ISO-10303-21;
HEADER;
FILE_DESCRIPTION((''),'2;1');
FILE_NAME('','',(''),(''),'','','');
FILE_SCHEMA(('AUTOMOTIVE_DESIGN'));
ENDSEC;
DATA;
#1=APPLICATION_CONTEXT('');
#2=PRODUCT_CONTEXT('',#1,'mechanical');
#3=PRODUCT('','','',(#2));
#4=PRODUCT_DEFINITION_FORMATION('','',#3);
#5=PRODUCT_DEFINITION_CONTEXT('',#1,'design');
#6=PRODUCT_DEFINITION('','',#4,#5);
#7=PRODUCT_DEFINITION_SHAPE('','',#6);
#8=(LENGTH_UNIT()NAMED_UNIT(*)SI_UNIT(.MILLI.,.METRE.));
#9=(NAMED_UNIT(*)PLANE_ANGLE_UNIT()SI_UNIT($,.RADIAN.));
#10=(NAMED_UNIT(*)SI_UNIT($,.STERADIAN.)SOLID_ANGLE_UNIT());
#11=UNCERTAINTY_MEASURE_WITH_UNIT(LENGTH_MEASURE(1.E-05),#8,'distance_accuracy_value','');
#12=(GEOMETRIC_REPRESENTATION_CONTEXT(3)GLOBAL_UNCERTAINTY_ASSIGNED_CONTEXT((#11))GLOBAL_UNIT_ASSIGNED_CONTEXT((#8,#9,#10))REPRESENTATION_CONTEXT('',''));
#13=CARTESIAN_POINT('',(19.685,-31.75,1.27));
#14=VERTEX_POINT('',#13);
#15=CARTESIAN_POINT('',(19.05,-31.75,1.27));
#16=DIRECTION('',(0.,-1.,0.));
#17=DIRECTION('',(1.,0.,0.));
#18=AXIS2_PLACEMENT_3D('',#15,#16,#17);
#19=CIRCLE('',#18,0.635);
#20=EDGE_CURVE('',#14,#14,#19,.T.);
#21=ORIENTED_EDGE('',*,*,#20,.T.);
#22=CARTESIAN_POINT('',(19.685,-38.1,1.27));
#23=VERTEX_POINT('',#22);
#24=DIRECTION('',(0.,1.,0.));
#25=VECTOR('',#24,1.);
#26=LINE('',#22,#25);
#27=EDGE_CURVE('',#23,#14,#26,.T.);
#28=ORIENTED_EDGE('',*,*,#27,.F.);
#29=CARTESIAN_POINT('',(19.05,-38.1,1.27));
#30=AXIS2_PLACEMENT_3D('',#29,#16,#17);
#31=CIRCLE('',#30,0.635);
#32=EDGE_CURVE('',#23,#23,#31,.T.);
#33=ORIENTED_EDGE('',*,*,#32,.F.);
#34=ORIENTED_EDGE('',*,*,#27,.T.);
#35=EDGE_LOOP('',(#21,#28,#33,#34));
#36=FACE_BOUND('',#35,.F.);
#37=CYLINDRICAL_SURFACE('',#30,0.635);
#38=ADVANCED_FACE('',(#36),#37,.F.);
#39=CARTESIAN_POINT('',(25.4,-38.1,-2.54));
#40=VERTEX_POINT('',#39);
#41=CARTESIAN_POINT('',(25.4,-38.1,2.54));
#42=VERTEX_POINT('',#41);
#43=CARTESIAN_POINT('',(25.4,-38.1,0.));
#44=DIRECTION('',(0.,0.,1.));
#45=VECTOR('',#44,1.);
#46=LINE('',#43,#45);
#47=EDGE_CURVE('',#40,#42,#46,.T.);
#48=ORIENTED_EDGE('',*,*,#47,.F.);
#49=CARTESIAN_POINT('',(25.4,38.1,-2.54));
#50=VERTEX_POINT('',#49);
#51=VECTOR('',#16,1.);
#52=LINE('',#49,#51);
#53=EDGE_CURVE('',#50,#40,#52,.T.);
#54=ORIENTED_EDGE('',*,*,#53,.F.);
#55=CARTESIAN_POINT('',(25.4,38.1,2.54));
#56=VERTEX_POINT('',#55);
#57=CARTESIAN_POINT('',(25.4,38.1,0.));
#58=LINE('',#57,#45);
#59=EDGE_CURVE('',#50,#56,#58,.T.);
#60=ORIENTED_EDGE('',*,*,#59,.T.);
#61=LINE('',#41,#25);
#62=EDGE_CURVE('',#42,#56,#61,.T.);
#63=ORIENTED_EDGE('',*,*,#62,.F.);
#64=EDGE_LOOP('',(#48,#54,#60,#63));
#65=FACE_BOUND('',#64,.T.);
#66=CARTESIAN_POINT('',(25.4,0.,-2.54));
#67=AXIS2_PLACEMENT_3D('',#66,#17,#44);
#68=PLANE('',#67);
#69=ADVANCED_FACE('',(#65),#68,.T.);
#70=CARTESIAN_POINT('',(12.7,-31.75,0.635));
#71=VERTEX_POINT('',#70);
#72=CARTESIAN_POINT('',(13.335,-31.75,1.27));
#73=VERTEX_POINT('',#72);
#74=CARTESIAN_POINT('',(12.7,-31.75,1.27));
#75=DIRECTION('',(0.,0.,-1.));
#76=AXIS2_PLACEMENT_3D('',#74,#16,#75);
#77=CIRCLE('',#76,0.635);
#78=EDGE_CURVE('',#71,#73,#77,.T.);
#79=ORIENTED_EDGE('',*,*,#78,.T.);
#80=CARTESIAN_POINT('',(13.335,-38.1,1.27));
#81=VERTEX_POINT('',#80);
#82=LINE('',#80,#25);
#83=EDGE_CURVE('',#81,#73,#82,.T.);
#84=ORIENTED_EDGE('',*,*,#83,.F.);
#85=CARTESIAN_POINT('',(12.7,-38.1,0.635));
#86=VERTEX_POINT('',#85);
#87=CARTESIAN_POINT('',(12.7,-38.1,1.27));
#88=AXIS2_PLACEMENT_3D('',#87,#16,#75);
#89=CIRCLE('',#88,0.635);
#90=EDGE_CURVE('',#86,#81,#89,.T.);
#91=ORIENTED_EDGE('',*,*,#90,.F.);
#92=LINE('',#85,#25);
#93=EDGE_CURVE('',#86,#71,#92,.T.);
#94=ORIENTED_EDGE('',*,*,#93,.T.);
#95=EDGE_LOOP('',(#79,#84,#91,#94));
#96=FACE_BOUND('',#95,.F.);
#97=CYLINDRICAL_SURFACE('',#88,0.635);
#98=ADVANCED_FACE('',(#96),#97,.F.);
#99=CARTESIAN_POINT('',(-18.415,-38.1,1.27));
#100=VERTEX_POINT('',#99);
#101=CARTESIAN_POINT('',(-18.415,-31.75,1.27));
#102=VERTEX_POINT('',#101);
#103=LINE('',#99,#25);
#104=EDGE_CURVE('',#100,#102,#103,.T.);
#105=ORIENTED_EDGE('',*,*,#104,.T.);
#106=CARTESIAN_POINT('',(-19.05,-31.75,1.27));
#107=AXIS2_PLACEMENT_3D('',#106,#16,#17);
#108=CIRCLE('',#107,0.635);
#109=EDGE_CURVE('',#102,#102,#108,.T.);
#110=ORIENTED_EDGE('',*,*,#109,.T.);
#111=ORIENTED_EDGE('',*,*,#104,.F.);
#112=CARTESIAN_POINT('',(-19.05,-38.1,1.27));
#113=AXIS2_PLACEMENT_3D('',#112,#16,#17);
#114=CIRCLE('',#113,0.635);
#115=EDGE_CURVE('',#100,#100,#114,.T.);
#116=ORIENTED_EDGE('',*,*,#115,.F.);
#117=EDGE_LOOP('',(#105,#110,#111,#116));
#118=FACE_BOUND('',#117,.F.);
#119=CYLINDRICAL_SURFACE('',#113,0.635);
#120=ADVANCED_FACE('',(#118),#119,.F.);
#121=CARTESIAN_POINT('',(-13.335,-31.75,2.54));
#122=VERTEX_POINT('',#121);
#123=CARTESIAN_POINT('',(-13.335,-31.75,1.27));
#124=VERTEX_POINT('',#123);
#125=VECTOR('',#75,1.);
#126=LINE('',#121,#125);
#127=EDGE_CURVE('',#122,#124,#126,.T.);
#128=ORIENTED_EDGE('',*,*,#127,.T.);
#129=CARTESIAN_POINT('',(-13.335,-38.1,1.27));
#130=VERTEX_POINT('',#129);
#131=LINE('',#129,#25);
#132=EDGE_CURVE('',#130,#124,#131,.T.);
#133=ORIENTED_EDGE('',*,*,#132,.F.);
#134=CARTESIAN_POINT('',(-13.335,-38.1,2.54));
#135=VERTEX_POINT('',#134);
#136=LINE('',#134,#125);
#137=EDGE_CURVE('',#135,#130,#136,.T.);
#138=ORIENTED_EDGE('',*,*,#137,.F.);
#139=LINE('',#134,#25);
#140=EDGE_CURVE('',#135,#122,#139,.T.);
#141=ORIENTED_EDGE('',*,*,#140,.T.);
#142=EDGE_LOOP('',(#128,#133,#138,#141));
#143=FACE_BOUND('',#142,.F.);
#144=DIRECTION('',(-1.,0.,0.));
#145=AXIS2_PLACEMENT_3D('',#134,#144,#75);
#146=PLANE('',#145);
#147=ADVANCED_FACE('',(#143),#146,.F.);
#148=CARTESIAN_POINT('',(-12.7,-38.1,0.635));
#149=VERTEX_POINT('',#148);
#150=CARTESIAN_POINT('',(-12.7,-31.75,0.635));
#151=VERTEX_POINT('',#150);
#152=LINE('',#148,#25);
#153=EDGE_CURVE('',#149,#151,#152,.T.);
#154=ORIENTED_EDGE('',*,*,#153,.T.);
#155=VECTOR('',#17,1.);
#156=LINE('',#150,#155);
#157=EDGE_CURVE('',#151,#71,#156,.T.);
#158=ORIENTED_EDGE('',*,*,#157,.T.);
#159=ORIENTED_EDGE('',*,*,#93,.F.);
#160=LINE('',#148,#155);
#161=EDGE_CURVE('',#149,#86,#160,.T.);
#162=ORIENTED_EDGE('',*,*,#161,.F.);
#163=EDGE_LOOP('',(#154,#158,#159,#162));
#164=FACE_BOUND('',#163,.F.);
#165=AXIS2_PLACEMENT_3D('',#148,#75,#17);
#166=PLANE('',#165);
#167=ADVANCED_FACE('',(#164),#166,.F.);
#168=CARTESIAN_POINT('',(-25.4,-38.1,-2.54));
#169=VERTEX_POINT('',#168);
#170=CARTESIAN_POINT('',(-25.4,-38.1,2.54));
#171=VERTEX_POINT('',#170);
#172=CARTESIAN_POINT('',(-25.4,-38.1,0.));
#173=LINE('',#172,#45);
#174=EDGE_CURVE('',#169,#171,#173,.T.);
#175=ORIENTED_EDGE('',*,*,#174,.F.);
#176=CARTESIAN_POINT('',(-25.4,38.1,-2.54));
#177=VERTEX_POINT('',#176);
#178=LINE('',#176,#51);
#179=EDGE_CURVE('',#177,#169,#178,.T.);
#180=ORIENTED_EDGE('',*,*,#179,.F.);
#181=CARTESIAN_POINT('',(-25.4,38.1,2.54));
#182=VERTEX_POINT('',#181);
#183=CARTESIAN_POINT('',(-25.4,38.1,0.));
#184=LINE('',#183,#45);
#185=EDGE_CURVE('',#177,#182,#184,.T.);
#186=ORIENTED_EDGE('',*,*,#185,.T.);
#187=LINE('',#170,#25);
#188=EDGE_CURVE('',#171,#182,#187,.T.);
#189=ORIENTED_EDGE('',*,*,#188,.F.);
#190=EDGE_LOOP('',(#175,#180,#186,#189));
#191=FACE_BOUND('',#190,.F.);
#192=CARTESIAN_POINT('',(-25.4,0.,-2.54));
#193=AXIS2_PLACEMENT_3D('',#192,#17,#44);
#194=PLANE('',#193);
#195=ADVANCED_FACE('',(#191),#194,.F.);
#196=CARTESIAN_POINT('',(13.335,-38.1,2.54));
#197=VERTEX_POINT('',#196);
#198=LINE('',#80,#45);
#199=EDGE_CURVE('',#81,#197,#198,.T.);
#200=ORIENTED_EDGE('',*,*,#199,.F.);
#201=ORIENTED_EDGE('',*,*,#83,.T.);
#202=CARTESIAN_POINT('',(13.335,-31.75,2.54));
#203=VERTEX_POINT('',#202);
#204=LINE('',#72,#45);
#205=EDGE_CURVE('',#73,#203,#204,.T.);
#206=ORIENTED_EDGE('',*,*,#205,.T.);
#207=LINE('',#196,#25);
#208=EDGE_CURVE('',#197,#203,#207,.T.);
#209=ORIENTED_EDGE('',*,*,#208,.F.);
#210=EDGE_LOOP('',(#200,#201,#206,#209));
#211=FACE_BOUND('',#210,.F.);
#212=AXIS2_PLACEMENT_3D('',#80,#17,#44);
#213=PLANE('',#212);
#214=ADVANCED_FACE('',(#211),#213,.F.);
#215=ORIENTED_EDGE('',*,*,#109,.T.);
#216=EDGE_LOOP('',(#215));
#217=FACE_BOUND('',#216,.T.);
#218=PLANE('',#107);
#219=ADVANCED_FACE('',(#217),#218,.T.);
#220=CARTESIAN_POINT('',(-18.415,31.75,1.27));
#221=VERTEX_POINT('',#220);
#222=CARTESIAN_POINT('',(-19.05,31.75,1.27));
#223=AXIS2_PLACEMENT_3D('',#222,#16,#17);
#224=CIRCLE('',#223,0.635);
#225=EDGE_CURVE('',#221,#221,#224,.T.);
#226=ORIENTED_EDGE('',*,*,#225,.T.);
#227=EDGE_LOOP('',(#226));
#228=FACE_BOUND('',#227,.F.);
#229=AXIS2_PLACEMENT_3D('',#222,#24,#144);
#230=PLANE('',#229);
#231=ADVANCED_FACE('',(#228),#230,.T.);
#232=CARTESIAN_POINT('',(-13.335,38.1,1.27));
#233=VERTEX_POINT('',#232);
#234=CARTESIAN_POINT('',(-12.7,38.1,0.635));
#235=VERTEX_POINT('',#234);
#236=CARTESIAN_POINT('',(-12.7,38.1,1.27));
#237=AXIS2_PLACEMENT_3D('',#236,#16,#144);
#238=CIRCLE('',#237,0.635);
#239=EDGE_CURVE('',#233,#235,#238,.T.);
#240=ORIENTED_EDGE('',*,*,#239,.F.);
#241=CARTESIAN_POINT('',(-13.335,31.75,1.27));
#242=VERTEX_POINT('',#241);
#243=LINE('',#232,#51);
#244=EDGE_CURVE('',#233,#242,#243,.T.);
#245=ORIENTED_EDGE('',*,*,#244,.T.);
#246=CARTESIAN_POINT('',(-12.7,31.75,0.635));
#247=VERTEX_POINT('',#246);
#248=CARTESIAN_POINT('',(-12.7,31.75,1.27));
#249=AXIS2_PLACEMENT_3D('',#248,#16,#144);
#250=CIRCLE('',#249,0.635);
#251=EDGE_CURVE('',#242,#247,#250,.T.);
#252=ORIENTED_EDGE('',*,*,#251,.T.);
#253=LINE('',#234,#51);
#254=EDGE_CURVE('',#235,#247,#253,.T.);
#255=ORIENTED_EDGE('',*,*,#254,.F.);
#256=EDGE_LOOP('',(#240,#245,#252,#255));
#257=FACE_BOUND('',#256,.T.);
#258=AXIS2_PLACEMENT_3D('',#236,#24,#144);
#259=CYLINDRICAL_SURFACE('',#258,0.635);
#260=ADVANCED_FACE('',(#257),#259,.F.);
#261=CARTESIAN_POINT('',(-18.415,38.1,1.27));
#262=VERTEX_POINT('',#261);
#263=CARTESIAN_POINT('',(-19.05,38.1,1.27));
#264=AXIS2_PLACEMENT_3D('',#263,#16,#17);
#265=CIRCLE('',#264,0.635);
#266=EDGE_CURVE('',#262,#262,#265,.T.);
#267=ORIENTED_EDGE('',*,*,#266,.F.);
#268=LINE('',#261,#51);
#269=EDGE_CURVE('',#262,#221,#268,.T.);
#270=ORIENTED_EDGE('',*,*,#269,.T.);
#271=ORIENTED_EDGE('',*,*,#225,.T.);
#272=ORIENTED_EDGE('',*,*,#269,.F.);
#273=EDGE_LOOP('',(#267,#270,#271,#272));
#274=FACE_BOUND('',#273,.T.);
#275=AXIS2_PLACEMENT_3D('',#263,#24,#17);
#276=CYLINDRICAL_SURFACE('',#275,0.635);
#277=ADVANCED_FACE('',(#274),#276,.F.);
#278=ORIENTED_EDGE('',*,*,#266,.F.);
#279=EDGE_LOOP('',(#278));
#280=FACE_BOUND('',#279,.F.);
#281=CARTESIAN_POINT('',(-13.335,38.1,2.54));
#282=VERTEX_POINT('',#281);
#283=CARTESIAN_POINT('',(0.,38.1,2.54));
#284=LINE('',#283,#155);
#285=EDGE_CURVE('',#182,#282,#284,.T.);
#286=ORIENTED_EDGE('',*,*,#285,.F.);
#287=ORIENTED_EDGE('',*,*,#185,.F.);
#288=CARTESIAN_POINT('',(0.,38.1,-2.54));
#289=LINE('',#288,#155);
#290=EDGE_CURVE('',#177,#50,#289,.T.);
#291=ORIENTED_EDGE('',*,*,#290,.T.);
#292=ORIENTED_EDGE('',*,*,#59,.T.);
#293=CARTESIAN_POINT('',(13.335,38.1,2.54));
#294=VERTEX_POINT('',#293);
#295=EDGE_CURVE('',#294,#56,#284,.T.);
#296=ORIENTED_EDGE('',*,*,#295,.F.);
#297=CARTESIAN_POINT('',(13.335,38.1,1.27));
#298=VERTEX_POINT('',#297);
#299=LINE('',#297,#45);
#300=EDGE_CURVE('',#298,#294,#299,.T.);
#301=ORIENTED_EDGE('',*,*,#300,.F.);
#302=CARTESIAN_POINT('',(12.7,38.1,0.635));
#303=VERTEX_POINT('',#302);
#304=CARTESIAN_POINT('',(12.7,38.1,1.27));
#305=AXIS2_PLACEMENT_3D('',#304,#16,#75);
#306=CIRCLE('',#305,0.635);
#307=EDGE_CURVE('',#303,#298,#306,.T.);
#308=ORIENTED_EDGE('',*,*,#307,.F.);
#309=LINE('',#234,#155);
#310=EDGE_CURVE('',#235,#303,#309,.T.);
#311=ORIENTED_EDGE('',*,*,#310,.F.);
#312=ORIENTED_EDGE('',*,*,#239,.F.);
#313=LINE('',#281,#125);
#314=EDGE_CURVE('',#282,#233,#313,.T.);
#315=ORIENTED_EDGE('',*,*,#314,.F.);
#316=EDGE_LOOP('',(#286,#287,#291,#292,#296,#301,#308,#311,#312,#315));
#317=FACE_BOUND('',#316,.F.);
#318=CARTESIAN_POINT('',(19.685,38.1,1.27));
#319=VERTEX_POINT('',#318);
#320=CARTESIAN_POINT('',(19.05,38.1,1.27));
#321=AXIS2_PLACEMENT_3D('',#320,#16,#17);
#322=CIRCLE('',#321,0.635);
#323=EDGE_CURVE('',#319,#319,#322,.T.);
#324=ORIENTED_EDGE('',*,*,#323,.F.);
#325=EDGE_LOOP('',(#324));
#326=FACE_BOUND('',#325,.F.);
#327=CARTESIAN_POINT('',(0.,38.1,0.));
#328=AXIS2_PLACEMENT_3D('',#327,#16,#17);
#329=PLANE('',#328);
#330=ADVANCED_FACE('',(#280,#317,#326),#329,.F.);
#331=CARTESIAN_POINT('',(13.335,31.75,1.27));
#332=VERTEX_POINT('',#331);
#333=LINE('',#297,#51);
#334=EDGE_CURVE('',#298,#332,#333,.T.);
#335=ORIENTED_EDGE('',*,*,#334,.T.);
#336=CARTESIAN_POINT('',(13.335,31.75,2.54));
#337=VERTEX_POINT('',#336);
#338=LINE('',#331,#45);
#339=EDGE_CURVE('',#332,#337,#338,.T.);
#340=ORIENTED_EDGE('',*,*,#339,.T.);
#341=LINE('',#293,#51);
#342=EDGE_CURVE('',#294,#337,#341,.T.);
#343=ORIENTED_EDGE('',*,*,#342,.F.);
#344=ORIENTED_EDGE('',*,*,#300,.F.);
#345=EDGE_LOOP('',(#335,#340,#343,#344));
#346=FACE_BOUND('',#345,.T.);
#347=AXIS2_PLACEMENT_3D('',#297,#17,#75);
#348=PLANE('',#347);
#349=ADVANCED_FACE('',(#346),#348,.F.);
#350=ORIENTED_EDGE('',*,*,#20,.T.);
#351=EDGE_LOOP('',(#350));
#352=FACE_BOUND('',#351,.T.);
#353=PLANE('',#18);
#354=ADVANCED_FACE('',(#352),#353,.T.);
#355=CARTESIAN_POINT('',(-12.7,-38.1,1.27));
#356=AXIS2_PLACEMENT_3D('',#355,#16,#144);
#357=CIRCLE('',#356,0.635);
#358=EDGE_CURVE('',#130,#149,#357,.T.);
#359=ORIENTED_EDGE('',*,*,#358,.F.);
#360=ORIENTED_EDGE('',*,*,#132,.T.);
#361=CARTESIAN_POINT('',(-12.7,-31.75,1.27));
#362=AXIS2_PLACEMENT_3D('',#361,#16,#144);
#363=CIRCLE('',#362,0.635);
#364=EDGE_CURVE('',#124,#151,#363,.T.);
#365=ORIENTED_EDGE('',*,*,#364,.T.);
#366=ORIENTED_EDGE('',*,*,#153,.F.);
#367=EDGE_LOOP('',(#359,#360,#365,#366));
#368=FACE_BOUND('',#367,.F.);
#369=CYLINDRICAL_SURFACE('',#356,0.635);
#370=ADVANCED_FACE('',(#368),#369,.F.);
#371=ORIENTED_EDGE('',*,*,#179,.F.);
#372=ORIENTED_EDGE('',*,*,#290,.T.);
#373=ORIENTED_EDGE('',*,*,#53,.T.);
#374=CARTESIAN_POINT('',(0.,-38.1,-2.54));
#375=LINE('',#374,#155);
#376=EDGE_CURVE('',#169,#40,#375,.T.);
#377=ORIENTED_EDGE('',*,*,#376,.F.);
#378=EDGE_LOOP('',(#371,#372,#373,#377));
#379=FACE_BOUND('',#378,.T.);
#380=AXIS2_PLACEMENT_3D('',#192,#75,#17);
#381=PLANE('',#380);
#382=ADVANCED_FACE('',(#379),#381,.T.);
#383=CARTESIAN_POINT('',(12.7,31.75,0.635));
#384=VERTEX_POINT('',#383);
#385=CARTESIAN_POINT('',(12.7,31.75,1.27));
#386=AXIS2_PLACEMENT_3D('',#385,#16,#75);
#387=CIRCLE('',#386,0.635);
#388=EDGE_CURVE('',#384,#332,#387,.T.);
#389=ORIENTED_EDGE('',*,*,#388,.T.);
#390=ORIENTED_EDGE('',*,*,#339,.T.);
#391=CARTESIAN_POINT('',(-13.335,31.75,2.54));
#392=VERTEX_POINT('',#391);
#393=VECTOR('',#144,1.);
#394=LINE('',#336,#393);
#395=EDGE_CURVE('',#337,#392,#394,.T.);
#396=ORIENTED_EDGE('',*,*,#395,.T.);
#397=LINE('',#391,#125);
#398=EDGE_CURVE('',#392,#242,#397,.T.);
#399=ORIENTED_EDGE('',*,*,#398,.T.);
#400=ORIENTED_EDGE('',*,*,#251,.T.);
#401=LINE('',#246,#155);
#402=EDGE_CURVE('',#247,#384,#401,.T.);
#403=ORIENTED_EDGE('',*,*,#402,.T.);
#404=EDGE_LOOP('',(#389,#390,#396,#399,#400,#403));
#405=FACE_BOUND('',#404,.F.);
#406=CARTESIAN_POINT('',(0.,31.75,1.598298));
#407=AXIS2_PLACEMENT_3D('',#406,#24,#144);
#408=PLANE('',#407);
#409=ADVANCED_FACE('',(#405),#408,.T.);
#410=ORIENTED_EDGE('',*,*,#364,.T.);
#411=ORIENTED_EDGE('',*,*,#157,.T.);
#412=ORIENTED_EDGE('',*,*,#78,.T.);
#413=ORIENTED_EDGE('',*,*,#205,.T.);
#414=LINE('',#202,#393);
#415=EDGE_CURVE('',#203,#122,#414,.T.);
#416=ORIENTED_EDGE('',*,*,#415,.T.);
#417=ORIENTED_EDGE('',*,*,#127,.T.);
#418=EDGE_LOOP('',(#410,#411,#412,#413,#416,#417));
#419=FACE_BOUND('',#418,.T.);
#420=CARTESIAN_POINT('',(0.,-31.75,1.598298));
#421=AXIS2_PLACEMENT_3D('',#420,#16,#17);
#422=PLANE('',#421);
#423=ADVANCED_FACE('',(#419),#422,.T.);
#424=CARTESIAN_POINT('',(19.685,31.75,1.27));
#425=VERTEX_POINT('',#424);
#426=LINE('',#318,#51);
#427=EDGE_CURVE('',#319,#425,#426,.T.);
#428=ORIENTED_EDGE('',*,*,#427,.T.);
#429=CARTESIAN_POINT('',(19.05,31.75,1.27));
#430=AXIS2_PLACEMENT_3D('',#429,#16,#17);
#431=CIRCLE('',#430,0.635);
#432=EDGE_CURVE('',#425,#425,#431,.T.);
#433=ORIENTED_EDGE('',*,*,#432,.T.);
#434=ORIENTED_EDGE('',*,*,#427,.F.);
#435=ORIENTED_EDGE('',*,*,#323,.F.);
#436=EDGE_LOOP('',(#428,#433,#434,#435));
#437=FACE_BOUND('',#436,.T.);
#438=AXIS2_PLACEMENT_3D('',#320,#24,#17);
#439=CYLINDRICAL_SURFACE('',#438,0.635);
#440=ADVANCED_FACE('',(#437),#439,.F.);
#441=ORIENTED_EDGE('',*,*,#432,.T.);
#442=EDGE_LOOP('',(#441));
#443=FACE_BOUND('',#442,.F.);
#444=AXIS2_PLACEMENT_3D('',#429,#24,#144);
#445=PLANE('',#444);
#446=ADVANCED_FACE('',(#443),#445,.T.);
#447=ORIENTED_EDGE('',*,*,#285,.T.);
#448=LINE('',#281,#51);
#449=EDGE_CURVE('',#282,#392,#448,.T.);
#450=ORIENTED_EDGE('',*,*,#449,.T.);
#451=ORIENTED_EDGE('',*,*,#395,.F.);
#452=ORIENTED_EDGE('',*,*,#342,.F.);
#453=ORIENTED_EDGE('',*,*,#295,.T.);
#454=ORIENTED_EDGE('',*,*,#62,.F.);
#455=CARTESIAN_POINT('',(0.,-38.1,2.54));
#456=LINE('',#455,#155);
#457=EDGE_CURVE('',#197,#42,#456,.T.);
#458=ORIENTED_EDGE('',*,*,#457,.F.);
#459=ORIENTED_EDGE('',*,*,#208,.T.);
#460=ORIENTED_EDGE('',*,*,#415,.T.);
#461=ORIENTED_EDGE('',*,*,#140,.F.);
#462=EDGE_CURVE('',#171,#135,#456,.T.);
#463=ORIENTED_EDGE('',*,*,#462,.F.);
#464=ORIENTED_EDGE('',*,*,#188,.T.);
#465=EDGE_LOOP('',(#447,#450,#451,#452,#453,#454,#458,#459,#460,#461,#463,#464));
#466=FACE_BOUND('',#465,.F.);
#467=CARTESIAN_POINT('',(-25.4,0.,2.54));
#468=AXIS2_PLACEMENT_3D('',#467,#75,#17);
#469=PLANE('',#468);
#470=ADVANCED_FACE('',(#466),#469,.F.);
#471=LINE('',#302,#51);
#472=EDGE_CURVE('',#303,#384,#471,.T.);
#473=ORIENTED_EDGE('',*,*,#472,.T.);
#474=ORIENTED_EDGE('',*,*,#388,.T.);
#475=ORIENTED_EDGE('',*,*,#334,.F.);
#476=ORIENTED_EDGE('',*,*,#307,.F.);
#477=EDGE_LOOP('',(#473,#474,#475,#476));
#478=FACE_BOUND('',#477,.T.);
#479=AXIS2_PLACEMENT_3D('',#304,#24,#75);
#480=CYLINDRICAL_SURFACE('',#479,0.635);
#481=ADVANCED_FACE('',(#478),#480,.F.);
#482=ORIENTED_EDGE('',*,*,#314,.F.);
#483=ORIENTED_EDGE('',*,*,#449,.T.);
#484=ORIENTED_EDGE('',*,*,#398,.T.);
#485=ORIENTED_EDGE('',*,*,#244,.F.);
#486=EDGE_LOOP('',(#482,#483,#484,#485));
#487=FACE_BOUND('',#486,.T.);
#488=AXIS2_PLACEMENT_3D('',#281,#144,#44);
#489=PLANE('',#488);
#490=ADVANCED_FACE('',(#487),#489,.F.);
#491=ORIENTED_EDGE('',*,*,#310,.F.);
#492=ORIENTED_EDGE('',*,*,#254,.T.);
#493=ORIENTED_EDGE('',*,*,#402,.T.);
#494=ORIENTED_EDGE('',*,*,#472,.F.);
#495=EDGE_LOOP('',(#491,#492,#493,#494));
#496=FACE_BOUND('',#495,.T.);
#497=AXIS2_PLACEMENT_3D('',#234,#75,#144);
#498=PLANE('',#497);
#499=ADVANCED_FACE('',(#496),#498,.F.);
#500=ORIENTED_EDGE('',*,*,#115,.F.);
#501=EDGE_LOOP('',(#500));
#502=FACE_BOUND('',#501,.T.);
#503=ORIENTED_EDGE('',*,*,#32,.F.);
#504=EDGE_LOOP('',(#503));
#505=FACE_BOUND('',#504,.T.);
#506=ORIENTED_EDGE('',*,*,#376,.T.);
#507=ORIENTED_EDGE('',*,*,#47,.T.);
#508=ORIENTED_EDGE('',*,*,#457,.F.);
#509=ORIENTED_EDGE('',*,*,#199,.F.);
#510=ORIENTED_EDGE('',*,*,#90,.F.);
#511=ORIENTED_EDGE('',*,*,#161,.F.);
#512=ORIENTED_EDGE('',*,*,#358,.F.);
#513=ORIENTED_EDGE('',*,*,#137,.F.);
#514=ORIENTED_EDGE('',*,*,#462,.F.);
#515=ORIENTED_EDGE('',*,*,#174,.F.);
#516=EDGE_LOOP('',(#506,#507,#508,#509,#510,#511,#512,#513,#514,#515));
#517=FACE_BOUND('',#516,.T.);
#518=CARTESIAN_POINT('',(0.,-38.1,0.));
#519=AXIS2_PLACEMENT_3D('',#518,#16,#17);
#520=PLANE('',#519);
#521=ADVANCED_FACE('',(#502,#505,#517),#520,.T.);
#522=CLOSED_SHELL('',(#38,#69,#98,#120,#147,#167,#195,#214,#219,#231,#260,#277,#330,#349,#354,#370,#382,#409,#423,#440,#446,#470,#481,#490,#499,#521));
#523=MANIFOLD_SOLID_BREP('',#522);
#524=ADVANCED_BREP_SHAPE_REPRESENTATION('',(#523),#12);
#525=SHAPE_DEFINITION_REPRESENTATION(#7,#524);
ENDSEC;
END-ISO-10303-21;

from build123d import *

# Parameters (mm, degrees)
F0_W     = 50.8
F0_H     = 5.08
F1_DEPTH = 38.1
F2_R     = 0.635
F3_DEPTH = 6.35


# Not quite as in the source:
# - a pattern or mirror of a feature is missing from the dataset's text; its kind, count and spacing are read off the source's solid


with BuildPart() as f1:
    # F0 (on Front) → F1 (new body, symmetric)
    with BuildSketch(Plane.XZ):
        Rectangle(F0_W, F0_H)
    extrude(amount=F1_DEPTH, both=True)

    # F2 (on face) → F3 (cut)
    with BuildSketch(Plane.XZ.offset(38.1)):
        with Locations((-19.05, 1.27)):
            Circle(F2_R)
        with BuildLine():
            ThreePointArc((-13.335, 1.27), (-13.1490128061, 0.8209871939), (-12.7, 0.635))
            Line((-12.7, 0.635), (0, 0.635))
            Line((0, 0.635), (12.7, 0.635))
            ThreePointArc((12.7, 0.635), (13.1490128061, 0.8209871939), (13.335, 1.27))
            Line((13.335, 1.27), (13.335, 2.54))
            Line((13.335, 2.54), (-13.335, 2.54))
            Line((-13.335, 2.54), (-13.335, 1.27))
        make_face()
        with Locations((19.05, 1.27)):
            Circle(F2_R)
    f3 = extrude(amount=-F3_DEPTH, mode=Mode.SUBTRACT)

    # F3_copies: F3 across plane
    add(f3.mirror(Plane.ZX), mode=Mode.SUBTRACT)


solid = f1.part
